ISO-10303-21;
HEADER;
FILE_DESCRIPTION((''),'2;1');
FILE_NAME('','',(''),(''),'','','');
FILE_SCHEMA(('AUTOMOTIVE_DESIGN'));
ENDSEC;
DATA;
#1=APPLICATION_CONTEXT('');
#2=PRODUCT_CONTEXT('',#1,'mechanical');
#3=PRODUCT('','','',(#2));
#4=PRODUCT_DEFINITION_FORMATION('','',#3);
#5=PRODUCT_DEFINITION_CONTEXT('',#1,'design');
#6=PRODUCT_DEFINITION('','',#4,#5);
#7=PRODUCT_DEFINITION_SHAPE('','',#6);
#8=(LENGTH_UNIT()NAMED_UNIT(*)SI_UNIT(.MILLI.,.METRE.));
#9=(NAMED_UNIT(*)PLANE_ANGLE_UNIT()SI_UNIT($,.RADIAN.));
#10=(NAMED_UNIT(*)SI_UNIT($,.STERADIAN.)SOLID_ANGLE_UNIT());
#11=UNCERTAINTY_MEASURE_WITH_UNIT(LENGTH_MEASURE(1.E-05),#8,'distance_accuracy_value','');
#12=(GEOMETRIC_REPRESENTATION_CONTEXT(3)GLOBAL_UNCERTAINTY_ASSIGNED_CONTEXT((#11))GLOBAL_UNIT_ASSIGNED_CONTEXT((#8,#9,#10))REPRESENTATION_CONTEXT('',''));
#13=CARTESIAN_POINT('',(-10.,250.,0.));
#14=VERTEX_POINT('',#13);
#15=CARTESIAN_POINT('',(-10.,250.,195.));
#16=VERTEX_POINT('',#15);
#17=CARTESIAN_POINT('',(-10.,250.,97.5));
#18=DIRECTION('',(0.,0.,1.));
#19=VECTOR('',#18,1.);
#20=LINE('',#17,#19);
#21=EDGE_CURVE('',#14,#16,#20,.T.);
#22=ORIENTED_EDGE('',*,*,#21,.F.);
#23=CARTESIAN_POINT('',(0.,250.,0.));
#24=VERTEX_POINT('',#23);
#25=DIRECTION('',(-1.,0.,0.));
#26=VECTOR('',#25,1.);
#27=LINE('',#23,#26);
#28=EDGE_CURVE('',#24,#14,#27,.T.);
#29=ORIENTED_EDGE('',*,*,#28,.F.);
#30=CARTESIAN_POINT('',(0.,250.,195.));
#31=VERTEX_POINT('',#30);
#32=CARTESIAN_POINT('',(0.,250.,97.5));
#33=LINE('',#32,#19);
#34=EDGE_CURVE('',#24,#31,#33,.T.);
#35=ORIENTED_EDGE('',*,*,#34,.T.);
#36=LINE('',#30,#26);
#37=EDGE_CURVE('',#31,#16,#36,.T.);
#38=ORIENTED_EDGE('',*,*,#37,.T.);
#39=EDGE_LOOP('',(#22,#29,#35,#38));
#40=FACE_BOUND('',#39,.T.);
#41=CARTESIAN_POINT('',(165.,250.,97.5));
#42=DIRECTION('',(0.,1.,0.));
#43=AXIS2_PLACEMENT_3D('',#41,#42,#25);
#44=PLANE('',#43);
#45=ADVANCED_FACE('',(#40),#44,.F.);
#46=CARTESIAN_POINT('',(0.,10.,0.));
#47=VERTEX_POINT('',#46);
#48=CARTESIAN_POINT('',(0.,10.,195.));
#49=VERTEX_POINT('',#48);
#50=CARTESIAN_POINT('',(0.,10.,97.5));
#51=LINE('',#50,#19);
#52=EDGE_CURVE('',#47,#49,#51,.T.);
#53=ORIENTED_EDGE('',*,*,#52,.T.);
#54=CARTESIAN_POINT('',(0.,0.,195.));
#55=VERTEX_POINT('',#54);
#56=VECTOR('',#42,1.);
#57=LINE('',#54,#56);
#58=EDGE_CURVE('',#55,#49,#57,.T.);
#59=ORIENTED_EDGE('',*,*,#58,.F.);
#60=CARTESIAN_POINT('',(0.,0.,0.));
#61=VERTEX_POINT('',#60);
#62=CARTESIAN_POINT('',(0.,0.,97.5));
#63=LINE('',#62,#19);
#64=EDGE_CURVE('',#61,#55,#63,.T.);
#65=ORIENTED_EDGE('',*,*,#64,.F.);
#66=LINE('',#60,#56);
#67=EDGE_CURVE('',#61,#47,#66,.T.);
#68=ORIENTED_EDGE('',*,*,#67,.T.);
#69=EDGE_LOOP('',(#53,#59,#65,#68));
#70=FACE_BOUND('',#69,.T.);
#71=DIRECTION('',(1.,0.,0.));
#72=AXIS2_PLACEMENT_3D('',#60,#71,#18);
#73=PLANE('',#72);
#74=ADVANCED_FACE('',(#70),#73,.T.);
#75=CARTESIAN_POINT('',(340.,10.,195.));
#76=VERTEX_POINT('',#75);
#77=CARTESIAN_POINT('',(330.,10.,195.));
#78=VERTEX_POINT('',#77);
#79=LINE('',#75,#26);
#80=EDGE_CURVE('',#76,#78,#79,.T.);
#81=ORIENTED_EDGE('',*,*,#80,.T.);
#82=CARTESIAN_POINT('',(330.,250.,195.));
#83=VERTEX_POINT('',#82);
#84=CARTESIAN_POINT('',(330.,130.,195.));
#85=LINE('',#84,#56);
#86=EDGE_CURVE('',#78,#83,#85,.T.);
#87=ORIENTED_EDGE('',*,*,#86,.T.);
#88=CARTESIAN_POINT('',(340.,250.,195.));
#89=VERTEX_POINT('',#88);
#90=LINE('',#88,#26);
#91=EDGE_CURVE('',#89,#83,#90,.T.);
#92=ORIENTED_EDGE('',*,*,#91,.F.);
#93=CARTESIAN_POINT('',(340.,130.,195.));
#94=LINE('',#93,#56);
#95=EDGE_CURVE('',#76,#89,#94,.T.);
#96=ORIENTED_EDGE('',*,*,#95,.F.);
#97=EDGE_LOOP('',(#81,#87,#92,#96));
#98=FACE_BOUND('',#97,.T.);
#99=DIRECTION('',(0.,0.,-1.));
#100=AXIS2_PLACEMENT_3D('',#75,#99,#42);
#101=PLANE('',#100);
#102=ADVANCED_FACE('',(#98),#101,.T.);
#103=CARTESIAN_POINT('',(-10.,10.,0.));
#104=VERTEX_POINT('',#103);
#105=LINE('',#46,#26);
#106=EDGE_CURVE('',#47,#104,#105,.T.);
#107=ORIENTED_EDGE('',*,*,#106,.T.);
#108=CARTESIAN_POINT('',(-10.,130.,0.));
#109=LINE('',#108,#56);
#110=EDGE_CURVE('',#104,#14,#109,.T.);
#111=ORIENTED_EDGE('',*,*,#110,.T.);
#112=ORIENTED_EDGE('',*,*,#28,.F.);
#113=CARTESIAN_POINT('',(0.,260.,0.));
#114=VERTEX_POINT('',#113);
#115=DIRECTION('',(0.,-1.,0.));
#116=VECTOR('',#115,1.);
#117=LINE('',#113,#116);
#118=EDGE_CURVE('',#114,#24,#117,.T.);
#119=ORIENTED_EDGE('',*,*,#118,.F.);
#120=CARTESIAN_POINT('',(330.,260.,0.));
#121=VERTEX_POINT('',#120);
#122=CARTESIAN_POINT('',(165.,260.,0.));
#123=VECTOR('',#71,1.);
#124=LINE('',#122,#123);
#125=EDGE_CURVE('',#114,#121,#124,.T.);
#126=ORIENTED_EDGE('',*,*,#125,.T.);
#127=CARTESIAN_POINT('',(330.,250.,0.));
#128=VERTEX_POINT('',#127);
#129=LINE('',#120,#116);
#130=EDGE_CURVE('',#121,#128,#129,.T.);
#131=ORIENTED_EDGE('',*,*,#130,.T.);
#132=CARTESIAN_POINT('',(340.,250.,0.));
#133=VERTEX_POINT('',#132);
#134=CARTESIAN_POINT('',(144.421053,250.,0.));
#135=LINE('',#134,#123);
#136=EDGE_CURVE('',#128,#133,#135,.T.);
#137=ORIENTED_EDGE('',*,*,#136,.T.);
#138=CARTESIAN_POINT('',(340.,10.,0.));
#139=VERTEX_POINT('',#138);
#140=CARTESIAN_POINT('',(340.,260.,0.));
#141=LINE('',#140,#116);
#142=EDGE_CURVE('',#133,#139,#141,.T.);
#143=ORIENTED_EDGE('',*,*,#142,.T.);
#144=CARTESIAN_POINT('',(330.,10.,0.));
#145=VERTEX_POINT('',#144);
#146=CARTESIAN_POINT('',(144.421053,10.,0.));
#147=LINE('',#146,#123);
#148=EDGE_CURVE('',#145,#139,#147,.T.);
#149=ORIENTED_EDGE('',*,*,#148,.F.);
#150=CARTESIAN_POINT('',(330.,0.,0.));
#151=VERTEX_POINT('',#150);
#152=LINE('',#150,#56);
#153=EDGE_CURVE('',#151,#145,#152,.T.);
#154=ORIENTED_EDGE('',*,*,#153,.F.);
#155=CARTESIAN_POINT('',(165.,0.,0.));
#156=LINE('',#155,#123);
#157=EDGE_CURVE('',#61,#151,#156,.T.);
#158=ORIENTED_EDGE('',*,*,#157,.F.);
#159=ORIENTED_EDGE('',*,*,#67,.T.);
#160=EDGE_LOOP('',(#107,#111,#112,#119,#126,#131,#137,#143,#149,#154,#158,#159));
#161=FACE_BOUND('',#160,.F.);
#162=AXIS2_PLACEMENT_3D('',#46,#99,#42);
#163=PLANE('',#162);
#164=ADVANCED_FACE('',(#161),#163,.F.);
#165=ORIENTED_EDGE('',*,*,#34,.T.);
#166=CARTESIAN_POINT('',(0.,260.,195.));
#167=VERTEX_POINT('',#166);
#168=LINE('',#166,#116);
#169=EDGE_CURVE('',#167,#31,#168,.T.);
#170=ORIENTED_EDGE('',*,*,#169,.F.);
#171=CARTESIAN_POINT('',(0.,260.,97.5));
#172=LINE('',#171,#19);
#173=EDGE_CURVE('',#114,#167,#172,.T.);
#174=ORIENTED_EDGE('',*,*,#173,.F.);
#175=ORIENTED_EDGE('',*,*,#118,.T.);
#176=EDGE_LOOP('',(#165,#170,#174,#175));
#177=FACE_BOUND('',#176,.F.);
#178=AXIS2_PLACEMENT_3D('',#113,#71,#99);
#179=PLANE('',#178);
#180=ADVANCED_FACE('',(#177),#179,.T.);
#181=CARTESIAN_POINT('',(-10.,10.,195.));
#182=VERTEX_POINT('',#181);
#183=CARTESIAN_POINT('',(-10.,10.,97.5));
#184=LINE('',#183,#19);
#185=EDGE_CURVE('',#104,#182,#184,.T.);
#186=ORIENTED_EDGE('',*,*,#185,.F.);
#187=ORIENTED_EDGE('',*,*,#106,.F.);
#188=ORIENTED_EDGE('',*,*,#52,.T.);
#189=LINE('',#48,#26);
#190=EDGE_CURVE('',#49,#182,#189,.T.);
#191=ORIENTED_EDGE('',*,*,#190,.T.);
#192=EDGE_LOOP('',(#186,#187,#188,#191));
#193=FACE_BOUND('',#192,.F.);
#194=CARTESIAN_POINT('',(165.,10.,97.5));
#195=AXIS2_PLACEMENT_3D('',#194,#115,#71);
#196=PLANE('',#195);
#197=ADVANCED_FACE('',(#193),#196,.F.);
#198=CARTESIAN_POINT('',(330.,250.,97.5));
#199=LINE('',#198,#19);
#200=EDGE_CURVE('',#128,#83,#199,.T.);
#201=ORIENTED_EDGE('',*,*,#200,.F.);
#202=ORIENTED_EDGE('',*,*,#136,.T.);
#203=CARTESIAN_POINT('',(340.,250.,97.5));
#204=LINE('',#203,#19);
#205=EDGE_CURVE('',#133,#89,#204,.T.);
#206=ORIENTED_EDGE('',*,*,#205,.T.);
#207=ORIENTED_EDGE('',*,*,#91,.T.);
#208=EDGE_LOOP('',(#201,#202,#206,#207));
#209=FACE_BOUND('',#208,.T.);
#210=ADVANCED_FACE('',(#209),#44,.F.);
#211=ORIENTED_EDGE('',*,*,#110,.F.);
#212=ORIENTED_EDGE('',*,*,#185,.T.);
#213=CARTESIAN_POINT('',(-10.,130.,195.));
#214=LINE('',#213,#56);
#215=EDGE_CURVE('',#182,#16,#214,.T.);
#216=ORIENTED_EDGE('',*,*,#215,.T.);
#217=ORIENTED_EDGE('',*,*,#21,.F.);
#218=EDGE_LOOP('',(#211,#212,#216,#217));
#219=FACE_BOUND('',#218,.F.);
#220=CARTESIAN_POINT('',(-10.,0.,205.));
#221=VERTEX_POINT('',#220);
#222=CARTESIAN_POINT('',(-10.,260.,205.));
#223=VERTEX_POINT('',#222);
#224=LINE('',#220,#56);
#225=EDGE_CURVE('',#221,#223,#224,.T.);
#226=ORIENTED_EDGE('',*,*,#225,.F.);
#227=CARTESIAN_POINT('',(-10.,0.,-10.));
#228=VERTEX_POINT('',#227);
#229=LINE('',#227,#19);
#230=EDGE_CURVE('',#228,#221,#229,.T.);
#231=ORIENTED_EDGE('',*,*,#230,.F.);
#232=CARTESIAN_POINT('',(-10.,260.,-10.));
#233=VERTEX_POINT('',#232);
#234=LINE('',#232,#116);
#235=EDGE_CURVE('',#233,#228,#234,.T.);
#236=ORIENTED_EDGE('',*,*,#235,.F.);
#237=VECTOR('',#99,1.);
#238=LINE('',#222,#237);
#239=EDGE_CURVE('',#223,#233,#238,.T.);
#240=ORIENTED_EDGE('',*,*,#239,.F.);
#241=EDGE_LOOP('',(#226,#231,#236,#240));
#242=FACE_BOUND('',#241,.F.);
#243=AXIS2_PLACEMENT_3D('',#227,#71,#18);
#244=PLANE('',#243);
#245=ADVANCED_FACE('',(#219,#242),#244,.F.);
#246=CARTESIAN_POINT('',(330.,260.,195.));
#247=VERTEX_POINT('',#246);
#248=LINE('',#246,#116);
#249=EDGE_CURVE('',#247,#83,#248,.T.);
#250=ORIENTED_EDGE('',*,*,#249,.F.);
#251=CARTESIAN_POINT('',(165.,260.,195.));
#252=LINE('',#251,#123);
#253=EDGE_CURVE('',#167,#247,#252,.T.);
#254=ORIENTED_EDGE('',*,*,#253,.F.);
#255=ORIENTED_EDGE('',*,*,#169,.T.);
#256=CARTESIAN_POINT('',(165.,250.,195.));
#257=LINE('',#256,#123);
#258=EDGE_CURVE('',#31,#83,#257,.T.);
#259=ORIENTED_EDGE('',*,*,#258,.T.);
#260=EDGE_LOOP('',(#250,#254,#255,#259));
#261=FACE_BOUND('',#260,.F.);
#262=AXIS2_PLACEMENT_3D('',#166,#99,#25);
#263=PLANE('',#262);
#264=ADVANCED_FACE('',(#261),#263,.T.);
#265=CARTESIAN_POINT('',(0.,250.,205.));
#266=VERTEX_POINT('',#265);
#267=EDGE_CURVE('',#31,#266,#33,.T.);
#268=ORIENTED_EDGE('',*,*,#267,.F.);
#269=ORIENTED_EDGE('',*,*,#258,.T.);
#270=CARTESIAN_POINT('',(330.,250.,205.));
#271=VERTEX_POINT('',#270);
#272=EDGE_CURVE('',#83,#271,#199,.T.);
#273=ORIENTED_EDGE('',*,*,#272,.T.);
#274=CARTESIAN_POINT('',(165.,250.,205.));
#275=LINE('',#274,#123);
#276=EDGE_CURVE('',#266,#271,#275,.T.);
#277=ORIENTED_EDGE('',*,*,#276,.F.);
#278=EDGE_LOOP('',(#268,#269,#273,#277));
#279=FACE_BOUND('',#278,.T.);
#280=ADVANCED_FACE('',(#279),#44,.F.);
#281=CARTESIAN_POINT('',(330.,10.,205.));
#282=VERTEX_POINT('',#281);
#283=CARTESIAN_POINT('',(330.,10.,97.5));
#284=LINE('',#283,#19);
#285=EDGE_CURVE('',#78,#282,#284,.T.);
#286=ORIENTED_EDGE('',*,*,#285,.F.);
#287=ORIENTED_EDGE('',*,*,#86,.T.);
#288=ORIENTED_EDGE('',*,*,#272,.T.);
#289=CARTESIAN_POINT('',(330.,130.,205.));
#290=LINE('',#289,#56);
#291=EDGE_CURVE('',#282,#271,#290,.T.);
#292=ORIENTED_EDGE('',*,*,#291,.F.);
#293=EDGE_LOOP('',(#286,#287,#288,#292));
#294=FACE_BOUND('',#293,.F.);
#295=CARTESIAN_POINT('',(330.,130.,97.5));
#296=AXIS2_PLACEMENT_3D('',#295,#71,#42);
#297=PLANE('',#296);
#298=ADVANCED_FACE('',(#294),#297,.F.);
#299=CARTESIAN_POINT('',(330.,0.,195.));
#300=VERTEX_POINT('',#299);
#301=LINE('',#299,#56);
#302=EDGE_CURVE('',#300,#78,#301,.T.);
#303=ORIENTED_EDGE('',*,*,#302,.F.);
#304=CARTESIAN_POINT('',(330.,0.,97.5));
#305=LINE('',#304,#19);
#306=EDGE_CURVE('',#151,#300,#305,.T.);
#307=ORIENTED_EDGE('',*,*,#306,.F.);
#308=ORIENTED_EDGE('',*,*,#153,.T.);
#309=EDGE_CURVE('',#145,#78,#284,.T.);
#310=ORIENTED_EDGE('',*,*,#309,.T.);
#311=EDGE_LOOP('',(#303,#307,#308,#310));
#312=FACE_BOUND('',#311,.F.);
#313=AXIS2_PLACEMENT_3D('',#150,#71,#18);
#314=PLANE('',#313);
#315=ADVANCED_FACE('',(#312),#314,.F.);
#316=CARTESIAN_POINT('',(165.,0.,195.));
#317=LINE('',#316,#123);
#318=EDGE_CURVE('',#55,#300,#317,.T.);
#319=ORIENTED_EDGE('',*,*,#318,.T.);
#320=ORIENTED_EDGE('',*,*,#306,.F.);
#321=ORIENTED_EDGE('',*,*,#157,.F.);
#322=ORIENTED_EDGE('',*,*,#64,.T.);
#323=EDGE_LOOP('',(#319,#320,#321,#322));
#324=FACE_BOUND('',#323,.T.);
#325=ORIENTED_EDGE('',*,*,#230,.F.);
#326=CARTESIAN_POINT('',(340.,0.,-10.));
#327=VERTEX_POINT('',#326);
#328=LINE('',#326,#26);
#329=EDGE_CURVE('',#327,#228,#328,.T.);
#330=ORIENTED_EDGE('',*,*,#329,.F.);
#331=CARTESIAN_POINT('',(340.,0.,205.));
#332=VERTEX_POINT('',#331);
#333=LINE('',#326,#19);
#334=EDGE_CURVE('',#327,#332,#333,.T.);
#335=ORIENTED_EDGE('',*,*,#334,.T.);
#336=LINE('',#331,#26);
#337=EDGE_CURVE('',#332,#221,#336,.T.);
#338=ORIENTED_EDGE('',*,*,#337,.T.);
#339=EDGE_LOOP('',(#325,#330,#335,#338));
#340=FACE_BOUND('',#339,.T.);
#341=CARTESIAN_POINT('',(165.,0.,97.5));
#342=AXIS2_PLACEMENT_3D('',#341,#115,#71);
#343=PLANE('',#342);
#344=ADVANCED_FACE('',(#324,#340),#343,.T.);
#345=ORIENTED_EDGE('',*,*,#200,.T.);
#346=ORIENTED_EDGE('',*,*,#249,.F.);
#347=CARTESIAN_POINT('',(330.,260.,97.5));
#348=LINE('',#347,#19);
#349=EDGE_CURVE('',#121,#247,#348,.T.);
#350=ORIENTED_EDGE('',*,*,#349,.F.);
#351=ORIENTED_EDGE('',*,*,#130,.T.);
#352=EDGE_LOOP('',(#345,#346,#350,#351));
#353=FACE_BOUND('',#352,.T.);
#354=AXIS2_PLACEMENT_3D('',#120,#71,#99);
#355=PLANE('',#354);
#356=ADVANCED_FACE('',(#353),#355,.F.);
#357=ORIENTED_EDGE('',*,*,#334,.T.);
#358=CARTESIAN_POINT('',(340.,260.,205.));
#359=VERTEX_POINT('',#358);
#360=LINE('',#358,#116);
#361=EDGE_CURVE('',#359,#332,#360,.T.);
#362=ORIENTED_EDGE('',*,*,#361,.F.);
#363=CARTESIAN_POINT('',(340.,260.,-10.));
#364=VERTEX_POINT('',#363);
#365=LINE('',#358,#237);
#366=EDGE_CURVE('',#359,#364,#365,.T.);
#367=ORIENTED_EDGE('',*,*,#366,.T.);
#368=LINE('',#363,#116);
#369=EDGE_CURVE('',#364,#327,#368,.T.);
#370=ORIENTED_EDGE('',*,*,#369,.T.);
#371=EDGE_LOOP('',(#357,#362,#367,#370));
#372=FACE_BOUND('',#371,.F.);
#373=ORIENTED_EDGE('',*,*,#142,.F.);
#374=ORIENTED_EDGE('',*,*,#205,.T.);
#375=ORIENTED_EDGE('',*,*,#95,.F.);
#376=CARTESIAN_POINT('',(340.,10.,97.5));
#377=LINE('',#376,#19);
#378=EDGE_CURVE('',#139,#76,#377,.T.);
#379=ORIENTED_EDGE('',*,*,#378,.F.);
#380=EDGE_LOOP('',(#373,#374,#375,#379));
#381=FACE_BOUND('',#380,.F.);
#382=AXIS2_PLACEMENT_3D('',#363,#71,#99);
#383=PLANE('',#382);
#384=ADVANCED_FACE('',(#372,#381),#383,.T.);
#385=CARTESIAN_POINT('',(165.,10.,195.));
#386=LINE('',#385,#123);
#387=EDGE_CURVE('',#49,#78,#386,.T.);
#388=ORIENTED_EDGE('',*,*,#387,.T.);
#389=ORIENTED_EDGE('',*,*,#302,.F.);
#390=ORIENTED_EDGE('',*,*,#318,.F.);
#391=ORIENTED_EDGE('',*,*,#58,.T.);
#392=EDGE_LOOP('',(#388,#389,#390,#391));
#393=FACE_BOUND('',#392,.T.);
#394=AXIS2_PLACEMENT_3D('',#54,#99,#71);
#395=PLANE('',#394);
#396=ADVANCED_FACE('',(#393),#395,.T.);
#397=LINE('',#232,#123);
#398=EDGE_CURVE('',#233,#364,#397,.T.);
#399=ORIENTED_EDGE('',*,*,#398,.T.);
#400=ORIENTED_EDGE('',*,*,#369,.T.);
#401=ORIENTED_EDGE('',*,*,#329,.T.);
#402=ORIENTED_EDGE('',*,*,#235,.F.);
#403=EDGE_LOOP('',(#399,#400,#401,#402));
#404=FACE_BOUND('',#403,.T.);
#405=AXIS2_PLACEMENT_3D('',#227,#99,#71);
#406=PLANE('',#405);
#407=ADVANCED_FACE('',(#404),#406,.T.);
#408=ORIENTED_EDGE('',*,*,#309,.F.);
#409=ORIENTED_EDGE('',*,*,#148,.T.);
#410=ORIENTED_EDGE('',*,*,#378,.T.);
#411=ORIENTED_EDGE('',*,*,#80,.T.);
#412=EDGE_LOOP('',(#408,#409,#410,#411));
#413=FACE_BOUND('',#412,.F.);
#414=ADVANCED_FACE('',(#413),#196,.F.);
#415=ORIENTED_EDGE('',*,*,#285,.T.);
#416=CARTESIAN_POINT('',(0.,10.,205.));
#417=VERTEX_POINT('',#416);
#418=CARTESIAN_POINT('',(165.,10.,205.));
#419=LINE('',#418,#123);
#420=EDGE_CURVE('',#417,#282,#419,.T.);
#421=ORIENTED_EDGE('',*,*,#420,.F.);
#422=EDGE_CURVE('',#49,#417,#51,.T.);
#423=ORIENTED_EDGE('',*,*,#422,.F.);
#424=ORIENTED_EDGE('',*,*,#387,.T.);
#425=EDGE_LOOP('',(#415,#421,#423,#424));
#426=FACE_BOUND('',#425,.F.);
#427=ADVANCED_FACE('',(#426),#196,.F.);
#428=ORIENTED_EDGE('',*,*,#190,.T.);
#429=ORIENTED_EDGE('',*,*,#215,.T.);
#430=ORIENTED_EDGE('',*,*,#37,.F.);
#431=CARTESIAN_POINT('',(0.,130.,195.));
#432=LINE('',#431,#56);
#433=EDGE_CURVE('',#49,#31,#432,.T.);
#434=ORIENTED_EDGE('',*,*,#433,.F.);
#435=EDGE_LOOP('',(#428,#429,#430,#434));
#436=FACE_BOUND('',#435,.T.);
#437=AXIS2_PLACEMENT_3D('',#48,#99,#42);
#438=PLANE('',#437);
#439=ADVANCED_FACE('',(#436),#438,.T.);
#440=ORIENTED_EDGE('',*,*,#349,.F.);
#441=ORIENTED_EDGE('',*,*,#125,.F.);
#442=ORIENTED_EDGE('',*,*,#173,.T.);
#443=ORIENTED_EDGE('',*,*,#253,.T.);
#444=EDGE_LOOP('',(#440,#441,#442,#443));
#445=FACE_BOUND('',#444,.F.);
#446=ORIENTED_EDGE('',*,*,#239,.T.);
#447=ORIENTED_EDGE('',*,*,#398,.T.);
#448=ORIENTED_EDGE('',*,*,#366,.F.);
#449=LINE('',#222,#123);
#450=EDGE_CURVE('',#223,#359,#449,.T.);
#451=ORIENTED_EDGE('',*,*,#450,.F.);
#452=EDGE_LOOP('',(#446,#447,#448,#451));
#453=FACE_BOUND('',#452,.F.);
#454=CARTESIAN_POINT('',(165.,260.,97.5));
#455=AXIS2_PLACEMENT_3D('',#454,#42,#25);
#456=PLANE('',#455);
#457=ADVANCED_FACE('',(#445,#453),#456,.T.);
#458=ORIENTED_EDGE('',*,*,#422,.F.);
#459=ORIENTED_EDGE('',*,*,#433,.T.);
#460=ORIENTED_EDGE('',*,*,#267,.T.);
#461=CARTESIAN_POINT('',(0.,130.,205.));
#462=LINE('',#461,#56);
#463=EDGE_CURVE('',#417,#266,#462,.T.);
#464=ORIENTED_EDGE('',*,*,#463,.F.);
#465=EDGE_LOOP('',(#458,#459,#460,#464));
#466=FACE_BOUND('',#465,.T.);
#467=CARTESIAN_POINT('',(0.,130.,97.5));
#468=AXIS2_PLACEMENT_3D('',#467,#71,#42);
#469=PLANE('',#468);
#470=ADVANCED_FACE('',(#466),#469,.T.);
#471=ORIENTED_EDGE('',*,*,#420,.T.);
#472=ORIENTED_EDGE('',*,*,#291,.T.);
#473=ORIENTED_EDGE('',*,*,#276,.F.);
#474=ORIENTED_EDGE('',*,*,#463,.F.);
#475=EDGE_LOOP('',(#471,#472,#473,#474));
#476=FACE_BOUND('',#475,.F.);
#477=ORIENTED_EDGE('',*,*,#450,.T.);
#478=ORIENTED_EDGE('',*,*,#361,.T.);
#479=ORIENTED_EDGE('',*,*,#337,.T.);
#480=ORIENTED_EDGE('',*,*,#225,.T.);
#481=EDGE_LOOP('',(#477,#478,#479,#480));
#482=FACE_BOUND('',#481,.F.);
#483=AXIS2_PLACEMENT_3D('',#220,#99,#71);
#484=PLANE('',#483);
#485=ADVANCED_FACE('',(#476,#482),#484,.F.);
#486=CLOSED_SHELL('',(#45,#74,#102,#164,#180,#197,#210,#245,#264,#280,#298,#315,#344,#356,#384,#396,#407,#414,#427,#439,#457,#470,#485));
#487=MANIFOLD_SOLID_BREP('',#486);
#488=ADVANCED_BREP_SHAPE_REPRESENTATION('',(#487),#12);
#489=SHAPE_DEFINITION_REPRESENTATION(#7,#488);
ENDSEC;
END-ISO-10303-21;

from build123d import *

# Parameters (mm, degrees)
F0_W      = 350
F0_H      = 215
F0_W_2    = 330
F0_H_2    = 195
F2_DEPTH  = 10
F1_W      = 260
F1_H      = 215
F1_W_2    = 240
F1_H_2    = 195
F3_DEPTH  = 10
F4_W      = 340
F4_H      = 240
F5_DEPTH  = 10
F8_W      = 350
F8_H      = 215
F8_W_2    = 330
F8_H_2    = 195
F10_DEPTH = 10
F9_W      = 260
F9_H      = 215
F9_W_2    = 240
F9_H_2    = 195
F11_DEPTH = 10


# Not quite as in the source:
# - a pattern or mirror of a feature is missing from the dataset's text; its kind, count and spacing are read off the source's solid


with BuildPart() as f2:
    # F0 (on Front) → F2 (new body, through all)
    with BuildSketch(Plane.XZ):
        with Locations((165, 97.5)):
            Rectangle(F0_W, F0_H)
        with Locations((165, 97.5)):
            Rectangle(F0_W_2, F0_H_2, mode=Mode.SUBTRACT)
    extrude(amount=-F2_DEPTH)


with BuildPart() as f2_copies_1:
    # F2_copies: instance of F2
    add(f2.part.mirror(Plane.ZX.offset(130)))


with BuildPart() as f2_1:
    add(f2.part)

    add(f2_copies_1.part)  # F3 merges F2_copies_1
    # F1 (on Right) → F3 (join, through all)
    with BuildSketch(Plane.YZ):
        with Locations((130, 97.5)):
            Rectangle(F1_W, F1_H)
        with Locations((130, 97.5)):
            Rectangle(F1_W_2, F1_H_2, mode=Mode.SUBTRACT)
    extrude(amount=-F3_DEPTH)

    # F4 (on face) → F5 (join, through all)
    with BuildSketch(Plane(origin=(0, 0, -10), x_dir=(1, 0, 0), z_dir=(0, 0, -1))):
        Polygon((340, -10), (340, 0), (-10.0000000001, 0), (-10.0000000001, -260), (340, -260), (340, -250), (0, -250), (0, -10), align=None)
        with Locations((170, -130)):
            Rectangle(F4_W, F4_H)
    extrude(amount=-F5_DEPTH)

    # F8 (on plane+point) → F10 (join, through all)
    with BuildSketch(Plane.XZ.offset(-260)):
        with Locations((165, 97.5)):
            Rectangle(F8_W, F8_H)
        with Locations((165, 97.5)):
            Rectangle(F8_W_2, F8_H_2, mode=Mode.SUBTRACT)
    extrude(amount=F10_DEPTH)

    # F9 (on plane+point) → F11 (join, through all)
    with BuildSketch(Plane.YZ.offset(340)):
        with Locations((130, 97.5)):
            Rectangle(F9_W, F9_H)
        with Locations((130, 97.5)):
            Rectangle(F9_W_2, F9_H_2, mode=Mode.SUBTRACT)
    extrude(amount=-F11_DEPTH)


solid = f2_1.part
